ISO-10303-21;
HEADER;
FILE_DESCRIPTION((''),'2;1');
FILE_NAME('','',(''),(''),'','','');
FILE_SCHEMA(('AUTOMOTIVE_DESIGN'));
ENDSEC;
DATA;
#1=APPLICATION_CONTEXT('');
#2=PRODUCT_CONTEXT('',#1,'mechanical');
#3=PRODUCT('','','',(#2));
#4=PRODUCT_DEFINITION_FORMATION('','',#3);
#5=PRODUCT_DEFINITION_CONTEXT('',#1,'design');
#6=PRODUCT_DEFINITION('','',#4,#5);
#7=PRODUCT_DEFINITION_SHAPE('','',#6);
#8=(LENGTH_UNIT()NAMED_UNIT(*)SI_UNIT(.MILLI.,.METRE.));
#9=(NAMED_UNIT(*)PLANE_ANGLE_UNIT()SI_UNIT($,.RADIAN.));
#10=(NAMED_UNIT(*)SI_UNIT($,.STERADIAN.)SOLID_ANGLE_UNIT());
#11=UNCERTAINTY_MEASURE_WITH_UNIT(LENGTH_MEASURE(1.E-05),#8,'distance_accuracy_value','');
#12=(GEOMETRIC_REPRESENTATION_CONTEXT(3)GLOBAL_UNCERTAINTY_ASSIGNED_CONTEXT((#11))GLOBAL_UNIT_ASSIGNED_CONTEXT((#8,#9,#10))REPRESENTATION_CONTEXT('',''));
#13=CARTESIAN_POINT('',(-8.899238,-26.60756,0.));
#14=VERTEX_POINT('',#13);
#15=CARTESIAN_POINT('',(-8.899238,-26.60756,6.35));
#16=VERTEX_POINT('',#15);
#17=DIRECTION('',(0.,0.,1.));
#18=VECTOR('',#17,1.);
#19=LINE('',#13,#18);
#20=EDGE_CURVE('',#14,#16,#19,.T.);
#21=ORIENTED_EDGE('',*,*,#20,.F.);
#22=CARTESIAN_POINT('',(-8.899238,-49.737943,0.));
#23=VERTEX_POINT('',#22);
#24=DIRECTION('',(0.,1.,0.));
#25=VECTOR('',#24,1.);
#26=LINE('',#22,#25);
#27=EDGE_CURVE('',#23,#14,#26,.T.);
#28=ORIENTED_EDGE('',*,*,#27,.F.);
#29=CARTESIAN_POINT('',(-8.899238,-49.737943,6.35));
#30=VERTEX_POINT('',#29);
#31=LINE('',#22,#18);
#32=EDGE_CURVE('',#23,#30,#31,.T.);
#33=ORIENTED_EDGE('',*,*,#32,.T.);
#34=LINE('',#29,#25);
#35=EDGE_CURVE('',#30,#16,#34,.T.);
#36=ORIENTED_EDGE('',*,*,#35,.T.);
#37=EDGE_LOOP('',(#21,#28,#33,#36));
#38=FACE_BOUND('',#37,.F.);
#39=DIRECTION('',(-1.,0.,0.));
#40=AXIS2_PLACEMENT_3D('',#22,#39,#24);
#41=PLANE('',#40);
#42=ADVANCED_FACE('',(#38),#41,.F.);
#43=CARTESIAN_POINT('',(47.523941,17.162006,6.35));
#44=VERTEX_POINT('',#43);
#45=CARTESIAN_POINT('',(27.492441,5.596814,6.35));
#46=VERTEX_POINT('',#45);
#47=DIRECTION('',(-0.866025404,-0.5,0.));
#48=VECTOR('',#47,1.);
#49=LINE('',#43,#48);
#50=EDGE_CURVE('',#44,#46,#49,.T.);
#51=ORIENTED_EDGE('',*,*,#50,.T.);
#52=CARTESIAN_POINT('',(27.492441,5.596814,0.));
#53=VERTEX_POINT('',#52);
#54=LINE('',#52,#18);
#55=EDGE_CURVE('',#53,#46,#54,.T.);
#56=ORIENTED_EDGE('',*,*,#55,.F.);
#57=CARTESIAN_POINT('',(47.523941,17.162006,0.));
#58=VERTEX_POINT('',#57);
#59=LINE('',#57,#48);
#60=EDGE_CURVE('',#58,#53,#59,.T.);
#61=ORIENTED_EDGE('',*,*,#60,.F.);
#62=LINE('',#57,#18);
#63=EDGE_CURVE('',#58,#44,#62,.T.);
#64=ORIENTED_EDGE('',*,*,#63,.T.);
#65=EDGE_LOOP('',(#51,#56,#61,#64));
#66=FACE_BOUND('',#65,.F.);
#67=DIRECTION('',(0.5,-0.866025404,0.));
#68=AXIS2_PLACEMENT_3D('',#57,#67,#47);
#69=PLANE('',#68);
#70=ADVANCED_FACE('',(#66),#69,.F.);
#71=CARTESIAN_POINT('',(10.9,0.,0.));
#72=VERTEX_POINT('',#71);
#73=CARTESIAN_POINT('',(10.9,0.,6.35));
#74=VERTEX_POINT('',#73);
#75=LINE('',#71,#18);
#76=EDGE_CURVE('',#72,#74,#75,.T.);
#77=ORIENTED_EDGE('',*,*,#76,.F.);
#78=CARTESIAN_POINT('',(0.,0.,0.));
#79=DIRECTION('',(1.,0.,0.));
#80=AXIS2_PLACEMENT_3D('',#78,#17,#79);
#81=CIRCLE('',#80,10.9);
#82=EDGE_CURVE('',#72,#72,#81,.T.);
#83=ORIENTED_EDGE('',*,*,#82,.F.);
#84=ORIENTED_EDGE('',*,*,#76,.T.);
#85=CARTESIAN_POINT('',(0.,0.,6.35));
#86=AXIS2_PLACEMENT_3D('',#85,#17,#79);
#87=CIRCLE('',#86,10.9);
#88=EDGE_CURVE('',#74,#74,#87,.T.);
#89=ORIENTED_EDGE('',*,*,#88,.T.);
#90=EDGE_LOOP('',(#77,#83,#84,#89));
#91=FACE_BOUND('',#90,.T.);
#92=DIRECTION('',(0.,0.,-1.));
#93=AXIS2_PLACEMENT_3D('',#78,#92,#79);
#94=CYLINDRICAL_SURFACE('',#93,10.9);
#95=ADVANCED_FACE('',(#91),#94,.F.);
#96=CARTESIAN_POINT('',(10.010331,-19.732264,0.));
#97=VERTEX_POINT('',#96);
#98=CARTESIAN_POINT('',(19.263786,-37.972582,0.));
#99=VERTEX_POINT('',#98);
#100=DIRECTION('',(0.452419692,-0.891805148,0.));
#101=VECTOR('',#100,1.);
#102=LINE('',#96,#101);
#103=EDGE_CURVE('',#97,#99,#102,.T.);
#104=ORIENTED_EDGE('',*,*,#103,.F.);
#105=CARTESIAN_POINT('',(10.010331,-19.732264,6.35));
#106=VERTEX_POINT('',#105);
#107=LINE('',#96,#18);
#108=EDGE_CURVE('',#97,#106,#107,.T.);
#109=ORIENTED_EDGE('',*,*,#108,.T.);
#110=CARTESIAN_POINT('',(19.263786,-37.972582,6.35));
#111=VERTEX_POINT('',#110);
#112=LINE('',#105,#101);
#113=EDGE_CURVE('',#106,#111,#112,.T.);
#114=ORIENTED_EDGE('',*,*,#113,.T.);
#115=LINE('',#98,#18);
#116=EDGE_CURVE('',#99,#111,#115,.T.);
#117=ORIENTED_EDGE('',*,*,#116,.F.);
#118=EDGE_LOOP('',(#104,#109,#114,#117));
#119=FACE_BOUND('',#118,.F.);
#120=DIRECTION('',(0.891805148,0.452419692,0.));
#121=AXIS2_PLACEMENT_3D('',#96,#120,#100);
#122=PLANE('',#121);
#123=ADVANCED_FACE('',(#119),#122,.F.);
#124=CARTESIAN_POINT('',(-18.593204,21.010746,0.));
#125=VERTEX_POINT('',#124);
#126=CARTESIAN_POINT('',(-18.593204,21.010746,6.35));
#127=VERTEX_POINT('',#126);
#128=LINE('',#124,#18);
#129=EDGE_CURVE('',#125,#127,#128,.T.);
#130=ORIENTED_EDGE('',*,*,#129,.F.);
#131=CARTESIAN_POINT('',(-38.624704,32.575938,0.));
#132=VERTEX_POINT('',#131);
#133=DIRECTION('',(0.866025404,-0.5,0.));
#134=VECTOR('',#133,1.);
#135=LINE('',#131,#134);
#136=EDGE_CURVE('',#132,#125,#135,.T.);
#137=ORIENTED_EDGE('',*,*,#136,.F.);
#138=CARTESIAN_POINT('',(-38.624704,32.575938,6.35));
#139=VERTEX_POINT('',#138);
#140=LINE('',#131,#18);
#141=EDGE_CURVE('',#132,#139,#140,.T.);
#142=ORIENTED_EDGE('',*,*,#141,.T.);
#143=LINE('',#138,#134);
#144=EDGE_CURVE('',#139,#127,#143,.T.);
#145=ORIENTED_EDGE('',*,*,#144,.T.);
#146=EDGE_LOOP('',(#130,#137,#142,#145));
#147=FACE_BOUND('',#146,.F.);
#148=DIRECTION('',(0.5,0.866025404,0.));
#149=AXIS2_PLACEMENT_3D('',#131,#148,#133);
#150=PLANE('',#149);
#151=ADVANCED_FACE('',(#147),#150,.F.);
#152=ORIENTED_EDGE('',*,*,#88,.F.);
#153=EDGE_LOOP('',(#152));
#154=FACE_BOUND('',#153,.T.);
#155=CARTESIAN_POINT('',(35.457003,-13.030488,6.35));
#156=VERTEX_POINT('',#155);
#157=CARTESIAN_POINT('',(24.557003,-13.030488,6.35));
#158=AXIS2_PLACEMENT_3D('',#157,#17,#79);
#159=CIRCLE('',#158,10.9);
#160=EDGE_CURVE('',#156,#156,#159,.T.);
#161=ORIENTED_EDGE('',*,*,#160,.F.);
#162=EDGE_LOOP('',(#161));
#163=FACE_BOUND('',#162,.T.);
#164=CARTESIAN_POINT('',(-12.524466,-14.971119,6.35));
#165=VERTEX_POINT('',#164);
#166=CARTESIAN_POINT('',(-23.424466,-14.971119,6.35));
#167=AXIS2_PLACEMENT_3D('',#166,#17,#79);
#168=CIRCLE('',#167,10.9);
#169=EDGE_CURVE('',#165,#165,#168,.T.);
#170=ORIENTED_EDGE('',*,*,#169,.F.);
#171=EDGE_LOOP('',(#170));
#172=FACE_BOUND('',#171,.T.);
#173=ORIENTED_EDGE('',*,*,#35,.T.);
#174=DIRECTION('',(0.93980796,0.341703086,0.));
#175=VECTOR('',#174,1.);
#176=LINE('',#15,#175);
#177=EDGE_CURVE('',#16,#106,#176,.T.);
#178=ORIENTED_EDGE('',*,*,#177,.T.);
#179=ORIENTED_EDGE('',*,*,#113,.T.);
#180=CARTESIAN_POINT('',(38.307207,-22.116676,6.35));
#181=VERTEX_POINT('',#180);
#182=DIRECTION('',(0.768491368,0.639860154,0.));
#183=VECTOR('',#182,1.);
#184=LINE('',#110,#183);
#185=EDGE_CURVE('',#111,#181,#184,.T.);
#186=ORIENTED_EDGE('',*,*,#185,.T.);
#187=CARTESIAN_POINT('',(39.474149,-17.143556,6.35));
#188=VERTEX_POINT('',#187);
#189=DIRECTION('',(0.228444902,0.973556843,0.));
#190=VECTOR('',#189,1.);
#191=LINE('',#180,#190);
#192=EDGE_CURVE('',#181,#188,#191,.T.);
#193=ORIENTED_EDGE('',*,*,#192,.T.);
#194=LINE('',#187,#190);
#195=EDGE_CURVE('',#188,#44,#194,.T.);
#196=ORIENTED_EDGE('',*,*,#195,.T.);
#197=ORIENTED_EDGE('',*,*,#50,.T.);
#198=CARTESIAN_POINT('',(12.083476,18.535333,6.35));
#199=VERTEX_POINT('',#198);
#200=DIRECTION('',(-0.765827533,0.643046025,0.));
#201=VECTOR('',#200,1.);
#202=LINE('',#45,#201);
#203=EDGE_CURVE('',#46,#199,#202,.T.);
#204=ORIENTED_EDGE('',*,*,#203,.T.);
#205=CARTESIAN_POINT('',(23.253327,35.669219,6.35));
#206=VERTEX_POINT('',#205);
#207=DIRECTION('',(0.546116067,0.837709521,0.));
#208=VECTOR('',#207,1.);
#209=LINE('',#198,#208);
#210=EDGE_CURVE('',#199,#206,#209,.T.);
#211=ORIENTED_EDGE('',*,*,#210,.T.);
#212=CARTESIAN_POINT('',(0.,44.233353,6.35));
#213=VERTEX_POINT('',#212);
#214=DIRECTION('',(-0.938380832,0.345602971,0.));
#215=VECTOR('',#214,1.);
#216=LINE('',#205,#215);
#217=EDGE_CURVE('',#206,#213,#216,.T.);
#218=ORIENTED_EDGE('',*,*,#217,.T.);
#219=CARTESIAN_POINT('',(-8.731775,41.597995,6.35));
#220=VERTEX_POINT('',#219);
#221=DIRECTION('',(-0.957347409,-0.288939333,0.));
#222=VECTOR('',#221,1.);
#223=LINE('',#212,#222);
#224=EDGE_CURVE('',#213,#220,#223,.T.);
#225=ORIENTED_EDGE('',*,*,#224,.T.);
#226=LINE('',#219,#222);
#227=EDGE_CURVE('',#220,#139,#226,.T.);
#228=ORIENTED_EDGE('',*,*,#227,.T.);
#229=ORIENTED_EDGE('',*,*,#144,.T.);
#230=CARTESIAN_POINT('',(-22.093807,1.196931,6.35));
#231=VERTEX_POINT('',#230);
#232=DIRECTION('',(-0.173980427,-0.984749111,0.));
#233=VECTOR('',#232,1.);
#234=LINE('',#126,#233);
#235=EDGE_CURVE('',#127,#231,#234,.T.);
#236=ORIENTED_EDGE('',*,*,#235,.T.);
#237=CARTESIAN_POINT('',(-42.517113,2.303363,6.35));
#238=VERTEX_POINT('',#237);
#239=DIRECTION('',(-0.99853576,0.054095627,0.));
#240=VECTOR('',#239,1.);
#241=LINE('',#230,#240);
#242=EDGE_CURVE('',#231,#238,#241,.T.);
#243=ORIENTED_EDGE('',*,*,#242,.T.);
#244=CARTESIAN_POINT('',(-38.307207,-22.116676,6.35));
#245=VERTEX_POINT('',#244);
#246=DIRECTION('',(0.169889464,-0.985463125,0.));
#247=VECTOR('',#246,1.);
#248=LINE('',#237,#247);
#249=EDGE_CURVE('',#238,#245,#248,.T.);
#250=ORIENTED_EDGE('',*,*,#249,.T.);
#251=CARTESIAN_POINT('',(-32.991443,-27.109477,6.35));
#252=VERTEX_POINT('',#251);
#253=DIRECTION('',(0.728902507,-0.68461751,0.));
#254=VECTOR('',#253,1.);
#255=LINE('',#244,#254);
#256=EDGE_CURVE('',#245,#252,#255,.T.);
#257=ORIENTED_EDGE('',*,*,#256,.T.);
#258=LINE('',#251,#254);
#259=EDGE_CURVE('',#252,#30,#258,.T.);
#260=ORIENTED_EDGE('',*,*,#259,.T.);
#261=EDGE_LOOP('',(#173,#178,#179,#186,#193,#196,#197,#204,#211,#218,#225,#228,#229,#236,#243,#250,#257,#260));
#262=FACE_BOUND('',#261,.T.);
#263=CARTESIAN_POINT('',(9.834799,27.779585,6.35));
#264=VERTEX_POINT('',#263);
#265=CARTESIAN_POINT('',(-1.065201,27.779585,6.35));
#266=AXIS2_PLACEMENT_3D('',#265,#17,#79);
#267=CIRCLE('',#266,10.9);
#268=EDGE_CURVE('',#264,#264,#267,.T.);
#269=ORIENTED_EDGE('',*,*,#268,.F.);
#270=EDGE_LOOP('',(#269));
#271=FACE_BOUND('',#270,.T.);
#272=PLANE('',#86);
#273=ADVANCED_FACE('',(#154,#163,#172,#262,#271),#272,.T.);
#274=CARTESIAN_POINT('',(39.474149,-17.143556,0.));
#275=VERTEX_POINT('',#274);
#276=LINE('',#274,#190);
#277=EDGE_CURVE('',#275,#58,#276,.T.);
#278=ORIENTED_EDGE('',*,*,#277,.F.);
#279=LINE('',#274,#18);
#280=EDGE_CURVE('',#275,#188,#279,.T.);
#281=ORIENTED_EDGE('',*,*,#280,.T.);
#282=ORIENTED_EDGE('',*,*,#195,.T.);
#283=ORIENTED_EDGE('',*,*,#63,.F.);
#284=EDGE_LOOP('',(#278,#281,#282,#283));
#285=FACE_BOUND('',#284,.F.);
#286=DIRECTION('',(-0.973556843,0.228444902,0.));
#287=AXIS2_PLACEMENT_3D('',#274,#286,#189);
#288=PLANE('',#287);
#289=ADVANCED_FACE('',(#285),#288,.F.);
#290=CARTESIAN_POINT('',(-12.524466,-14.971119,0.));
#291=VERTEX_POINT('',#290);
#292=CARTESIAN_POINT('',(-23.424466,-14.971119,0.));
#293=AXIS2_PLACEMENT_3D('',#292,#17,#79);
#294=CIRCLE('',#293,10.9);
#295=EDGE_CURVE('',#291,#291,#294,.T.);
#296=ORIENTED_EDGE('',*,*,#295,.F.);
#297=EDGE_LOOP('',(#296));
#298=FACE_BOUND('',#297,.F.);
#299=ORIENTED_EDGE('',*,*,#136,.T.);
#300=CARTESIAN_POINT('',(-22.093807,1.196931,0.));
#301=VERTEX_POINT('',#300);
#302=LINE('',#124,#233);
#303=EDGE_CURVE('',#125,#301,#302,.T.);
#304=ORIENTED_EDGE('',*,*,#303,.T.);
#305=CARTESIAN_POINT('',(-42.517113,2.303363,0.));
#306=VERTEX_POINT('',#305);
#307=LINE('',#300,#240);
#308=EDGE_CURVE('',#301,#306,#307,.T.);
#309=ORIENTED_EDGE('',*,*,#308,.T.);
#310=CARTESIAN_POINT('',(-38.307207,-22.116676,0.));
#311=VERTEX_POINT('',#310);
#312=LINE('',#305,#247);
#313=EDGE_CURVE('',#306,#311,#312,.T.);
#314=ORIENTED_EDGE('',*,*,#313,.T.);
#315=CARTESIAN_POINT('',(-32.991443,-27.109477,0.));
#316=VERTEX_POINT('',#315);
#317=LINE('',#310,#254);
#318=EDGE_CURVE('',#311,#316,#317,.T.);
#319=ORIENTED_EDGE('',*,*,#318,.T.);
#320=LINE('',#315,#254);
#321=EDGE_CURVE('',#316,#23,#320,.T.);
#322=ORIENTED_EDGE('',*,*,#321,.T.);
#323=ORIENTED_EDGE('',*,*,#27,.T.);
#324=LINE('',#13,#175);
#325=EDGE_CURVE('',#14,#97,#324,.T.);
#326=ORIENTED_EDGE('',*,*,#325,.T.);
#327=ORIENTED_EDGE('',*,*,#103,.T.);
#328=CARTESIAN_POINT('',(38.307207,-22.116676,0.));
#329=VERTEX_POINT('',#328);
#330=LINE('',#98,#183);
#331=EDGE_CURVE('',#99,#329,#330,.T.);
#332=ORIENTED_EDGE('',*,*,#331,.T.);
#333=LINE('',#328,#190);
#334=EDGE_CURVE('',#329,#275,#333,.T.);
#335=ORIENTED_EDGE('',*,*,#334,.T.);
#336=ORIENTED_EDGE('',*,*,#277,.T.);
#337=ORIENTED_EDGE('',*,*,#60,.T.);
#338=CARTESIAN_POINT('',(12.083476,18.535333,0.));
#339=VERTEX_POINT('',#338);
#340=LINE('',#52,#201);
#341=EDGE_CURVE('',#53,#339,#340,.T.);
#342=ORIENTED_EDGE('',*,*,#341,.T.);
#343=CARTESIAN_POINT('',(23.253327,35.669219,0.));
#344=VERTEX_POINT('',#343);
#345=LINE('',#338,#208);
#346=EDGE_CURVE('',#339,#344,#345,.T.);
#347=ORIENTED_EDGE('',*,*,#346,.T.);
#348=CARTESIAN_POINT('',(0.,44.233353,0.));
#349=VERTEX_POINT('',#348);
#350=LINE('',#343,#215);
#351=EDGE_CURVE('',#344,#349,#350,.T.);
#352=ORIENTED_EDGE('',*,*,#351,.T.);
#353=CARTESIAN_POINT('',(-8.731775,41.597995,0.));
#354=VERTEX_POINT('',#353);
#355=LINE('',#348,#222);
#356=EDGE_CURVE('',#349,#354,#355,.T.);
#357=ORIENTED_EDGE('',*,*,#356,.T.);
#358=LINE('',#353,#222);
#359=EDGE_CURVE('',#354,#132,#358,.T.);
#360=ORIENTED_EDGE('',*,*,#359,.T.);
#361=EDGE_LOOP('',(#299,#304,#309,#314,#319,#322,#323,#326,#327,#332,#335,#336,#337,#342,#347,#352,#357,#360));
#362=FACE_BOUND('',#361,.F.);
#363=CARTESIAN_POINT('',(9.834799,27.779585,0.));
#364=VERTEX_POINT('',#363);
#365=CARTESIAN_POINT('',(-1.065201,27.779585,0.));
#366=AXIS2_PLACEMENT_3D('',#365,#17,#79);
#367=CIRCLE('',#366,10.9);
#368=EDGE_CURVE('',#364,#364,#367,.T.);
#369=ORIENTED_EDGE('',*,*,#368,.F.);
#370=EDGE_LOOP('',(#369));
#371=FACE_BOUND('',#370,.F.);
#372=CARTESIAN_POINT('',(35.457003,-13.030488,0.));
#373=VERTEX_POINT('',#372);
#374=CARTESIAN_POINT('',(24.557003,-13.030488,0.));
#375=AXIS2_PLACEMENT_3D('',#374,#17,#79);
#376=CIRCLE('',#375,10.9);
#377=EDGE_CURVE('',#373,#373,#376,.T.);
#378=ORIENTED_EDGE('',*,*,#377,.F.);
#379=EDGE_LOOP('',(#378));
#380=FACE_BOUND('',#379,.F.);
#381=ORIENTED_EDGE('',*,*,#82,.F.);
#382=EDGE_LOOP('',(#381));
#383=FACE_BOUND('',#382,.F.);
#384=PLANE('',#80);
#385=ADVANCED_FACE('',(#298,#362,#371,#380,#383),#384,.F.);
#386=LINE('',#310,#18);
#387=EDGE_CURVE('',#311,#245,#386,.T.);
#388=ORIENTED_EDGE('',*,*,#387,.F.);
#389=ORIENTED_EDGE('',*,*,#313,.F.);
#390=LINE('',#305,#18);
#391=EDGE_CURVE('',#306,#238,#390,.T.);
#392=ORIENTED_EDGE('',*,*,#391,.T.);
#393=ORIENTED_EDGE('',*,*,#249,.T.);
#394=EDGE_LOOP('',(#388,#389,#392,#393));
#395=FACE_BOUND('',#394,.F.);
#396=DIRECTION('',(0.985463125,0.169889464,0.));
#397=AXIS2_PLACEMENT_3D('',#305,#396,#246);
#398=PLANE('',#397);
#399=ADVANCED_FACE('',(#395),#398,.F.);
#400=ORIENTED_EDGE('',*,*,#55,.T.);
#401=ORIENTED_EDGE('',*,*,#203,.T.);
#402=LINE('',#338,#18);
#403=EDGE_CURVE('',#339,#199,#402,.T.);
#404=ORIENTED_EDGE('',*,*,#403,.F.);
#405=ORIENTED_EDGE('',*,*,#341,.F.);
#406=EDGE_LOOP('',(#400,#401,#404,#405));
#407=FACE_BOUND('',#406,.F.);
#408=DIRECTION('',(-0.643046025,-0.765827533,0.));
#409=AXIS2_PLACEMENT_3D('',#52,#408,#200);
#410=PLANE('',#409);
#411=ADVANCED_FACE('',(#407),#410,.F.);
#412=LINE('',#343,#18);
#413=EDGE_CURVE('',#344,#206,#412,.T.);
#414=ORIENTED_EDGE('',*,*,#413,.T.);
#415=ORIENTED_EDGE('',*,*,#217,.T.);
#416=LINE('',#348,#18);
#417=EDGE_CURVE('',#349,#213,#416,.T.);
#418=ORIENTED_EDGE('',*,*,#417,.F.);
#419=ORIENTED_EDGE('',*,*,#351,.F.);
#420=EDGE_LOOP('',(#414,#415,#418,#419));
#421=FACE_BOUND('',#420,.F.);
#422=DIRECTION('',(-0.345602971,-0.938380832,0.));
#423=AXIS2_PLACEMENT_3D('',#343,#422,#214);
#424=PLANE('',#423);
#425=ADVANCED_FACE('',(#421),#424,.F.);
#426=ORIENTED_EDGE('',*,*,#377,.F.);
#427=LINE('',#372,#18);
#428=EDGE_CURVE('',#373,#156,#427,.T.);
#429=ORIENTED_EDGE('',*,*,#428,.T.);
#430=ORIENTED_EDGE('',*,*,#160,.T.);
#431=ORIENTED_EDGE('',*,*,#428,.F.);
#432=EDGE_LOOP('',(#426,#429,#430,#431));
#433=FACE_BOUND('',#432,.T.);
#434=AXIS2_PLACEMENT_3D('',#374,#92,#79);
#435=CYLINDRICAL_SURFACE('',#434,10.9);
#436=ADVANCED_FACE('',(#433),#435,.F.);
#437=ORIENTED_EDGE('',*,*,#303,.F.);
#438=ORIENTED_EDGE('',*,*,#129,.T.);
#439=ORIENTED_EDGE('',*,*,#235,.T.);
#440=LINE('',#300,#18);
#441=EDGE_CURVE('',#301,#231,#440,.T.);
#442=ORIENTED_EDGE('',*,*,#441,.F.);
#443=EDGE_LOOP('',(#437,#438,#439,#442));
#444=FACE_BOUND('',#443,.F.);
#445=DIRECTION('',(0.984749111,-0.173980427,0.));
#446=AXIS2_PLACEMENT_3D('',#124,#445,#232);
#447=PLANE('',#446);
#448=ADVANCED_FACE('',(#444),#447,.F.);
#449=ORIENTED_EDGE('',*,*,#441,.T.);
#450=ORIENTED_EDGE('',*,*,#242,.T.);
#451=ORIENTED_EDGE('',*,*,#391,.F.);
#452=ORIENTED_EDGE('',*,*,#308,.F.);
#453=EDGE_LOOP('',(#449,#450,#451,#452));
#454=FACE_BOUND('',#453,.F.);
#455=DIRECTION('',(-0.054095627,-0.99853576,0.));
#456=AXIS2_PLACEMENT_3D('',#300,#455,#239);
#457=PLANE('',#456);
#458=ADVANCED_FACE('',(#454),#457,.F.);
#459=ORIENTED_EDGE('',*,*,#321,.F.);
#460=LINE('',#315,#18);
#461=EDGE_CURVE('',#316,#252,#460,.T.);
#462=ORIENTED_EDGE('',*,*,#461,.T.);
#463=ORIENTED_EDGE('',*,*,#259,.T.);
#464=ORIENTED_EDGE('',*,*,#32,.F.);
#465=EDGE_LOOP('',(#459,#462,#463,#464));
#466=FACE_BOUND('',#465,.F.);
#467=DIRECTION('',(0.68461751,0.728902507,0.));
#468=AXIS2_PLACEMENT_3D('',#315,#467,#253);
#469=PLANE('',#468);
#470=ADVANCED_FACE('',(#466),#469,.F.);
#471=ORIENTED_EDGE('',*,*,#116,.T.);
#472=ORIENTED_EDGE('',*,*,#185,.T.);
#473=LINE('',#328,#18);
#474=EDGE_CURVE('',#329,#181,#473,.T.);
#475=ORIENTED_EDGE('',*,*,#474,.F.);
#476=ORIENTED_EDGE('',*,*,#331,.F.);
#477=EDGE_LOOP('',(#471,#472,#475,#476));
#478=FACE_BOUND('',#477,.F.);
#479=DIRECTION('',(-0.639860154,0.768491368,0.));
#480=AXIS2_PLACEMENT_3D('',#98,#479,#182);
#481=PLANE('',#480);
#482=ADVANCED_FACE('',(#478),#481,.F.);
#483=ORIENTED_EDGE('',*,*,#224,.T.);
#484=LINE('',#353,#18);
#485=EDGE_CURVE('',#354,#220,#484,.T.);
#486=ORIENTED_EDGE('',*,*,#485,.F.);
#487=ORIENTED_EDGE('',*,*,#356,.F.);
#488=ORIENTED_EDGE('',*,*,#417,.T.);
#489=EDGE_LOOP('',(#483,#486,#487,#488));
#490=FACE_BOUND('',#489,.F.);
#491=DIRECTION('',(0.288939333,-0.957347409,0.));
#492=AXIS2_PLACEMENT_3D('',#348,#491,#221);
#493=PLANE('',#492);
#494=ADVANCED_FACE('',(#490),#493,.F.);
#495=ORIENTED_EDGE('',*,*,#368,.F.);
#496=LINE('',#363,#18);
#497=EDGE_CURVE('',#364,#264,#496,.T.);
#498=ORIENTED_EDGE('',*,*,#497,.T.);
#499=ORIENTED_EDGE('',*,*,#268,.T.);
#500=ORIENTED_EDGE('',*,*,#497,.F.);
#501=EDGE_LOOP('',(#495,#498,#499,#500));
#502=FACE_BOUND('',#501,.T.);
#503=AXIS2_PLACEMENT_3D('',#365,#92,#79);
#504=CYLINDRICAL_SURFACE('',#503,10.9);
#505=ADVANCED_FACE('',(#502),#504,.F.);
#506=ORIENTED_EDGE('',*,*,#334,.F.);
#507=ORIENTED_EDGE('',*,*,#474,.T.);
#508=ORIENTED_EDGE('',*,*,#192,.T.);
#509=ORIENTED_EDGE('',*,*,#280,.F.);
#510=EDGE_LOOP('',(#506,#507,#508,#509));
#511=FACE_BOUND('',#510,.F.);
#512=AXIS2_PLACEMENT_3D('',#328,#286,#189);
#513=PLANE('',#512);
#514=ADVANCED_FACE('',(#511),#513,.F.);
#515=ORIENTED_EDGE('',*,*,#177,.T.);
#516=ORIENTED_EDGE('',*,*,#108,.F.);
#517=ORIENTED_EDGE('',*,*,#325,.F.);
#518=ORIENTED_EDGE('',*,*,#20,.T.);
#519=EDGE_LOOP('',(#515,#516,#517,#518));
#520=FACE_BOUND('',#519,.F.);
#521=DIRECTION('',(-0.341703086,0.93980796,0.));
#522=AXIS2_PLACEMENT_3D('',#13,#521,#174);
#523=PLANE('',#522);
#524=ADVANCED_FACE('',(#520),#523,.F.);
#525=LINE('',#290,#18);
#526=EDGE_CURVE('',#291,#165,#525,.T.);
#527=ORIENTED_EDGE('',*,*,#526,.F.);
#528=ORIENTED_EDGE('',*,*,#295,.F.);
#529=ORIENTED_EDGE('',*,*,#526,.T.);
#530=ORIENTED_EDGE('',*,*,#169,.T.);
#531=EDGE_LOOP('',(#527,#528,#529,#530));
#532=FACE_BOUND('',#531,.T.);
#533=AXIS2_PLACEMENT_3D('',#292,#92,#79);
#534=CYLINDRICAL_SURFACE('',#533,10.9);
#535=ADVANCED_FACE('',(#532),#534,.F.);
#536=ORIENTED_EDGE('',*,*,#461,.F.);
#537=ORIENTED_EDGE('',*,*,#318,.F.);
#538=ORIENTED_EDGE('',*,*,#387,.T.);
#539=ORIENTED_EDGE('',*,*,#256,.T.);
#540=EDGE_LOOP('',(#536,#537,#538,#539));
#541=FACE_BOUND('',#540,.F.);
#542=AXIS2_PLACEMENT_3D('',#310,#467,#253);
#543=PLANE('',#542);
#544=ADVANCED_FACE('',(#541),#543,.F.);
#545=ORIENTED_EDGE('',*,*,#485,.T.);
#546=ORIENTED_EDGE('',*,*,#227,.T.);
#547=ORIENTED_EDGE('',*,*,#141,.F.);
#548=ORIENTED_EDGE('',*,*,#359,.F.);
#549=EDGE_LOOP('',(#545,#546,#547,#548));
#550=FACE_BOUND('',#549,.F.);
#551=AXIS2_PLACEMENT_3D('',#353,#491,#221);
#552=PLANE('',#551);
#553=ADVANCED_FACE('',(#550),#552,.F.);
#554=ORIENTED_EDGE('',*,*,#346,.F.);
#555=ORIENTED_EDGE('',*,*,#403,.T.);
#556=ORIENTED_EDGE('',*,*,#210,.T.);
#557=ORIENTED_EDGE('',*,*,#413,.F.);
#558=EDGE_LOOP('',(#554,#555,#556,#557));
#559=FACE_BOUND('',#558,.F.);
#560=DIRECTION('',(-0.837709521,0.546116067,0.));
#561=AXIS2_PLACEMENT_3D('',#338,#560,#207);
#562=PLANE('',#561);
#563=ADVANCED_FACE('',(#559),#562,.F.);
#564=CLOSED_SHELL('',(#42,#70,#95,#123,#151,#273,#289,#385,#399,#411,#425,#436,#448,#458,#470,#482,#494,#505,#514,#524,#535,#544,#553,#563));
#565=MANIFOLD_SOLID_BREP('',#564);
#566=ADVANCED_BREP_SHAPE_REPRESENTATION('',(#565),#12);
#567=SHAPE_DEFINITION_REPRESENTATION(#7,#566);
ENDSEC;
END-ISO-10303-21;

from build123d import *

# Parameters (mm, degrees)
F0_R     = 10.9
F1_DEPTH = 6.35


# Not quite as in the source:
# - a length typed as a fraction of an inch, garbled in the dataset ("3 / 203.2 mm" for 3/8 in), is restored


with BuildPart() as f1:
    # F0 (on Top) → F1 (new body)
    with BuildSketch(Plane.XY):
        Polygon((12.0834760459, 18.5353325598), (23.2533272356, 35.6692190058), (0, 44.2333527703), (-8.7317753371, 41.5979945749), (-38.6247036873, 32.5759376999), (-18.593203622, 21.0107457448), (-22.0938068874, 1.1969309419), (-42.51711341, 2.3033626056), (-38.3072071936, -22.1166763852), (-34.5838293668, -25.6138377102), (-32.9914432749, -27.1094772381), (-8.8992377565, -49.7379434568), (-8.8992377565, -26.6075595468), (10.0103308414, -19.7322635017), (19.2637861744, -37.9725816114), (38.3072071936, -22.1166763852), (39.4741488289, -17.1435559367), (39.973217609, -15.0166893646), (47.5239414439, 17.162005757), (27.4924413785, 5.5968138019), align=None)
        with Locations((-23.4244655113, -14.9711193807)):
            Circle(F0_R, mode=Mode.SUBTRACT)
        with Locations((24.5570029423, -13.0304875769)):
            Circle(F0_R, mode=Mode.SUBTRACT)
        Circle(F0_R, mode=Mode.SUBTRACT)
        with Locations((-1.0652008007, 27.7795850807)):
            Circle(F0_R, mode=Mode.SUBTRACT)
    extrude(amount=F1_DEPTH)


solid = f1.part
